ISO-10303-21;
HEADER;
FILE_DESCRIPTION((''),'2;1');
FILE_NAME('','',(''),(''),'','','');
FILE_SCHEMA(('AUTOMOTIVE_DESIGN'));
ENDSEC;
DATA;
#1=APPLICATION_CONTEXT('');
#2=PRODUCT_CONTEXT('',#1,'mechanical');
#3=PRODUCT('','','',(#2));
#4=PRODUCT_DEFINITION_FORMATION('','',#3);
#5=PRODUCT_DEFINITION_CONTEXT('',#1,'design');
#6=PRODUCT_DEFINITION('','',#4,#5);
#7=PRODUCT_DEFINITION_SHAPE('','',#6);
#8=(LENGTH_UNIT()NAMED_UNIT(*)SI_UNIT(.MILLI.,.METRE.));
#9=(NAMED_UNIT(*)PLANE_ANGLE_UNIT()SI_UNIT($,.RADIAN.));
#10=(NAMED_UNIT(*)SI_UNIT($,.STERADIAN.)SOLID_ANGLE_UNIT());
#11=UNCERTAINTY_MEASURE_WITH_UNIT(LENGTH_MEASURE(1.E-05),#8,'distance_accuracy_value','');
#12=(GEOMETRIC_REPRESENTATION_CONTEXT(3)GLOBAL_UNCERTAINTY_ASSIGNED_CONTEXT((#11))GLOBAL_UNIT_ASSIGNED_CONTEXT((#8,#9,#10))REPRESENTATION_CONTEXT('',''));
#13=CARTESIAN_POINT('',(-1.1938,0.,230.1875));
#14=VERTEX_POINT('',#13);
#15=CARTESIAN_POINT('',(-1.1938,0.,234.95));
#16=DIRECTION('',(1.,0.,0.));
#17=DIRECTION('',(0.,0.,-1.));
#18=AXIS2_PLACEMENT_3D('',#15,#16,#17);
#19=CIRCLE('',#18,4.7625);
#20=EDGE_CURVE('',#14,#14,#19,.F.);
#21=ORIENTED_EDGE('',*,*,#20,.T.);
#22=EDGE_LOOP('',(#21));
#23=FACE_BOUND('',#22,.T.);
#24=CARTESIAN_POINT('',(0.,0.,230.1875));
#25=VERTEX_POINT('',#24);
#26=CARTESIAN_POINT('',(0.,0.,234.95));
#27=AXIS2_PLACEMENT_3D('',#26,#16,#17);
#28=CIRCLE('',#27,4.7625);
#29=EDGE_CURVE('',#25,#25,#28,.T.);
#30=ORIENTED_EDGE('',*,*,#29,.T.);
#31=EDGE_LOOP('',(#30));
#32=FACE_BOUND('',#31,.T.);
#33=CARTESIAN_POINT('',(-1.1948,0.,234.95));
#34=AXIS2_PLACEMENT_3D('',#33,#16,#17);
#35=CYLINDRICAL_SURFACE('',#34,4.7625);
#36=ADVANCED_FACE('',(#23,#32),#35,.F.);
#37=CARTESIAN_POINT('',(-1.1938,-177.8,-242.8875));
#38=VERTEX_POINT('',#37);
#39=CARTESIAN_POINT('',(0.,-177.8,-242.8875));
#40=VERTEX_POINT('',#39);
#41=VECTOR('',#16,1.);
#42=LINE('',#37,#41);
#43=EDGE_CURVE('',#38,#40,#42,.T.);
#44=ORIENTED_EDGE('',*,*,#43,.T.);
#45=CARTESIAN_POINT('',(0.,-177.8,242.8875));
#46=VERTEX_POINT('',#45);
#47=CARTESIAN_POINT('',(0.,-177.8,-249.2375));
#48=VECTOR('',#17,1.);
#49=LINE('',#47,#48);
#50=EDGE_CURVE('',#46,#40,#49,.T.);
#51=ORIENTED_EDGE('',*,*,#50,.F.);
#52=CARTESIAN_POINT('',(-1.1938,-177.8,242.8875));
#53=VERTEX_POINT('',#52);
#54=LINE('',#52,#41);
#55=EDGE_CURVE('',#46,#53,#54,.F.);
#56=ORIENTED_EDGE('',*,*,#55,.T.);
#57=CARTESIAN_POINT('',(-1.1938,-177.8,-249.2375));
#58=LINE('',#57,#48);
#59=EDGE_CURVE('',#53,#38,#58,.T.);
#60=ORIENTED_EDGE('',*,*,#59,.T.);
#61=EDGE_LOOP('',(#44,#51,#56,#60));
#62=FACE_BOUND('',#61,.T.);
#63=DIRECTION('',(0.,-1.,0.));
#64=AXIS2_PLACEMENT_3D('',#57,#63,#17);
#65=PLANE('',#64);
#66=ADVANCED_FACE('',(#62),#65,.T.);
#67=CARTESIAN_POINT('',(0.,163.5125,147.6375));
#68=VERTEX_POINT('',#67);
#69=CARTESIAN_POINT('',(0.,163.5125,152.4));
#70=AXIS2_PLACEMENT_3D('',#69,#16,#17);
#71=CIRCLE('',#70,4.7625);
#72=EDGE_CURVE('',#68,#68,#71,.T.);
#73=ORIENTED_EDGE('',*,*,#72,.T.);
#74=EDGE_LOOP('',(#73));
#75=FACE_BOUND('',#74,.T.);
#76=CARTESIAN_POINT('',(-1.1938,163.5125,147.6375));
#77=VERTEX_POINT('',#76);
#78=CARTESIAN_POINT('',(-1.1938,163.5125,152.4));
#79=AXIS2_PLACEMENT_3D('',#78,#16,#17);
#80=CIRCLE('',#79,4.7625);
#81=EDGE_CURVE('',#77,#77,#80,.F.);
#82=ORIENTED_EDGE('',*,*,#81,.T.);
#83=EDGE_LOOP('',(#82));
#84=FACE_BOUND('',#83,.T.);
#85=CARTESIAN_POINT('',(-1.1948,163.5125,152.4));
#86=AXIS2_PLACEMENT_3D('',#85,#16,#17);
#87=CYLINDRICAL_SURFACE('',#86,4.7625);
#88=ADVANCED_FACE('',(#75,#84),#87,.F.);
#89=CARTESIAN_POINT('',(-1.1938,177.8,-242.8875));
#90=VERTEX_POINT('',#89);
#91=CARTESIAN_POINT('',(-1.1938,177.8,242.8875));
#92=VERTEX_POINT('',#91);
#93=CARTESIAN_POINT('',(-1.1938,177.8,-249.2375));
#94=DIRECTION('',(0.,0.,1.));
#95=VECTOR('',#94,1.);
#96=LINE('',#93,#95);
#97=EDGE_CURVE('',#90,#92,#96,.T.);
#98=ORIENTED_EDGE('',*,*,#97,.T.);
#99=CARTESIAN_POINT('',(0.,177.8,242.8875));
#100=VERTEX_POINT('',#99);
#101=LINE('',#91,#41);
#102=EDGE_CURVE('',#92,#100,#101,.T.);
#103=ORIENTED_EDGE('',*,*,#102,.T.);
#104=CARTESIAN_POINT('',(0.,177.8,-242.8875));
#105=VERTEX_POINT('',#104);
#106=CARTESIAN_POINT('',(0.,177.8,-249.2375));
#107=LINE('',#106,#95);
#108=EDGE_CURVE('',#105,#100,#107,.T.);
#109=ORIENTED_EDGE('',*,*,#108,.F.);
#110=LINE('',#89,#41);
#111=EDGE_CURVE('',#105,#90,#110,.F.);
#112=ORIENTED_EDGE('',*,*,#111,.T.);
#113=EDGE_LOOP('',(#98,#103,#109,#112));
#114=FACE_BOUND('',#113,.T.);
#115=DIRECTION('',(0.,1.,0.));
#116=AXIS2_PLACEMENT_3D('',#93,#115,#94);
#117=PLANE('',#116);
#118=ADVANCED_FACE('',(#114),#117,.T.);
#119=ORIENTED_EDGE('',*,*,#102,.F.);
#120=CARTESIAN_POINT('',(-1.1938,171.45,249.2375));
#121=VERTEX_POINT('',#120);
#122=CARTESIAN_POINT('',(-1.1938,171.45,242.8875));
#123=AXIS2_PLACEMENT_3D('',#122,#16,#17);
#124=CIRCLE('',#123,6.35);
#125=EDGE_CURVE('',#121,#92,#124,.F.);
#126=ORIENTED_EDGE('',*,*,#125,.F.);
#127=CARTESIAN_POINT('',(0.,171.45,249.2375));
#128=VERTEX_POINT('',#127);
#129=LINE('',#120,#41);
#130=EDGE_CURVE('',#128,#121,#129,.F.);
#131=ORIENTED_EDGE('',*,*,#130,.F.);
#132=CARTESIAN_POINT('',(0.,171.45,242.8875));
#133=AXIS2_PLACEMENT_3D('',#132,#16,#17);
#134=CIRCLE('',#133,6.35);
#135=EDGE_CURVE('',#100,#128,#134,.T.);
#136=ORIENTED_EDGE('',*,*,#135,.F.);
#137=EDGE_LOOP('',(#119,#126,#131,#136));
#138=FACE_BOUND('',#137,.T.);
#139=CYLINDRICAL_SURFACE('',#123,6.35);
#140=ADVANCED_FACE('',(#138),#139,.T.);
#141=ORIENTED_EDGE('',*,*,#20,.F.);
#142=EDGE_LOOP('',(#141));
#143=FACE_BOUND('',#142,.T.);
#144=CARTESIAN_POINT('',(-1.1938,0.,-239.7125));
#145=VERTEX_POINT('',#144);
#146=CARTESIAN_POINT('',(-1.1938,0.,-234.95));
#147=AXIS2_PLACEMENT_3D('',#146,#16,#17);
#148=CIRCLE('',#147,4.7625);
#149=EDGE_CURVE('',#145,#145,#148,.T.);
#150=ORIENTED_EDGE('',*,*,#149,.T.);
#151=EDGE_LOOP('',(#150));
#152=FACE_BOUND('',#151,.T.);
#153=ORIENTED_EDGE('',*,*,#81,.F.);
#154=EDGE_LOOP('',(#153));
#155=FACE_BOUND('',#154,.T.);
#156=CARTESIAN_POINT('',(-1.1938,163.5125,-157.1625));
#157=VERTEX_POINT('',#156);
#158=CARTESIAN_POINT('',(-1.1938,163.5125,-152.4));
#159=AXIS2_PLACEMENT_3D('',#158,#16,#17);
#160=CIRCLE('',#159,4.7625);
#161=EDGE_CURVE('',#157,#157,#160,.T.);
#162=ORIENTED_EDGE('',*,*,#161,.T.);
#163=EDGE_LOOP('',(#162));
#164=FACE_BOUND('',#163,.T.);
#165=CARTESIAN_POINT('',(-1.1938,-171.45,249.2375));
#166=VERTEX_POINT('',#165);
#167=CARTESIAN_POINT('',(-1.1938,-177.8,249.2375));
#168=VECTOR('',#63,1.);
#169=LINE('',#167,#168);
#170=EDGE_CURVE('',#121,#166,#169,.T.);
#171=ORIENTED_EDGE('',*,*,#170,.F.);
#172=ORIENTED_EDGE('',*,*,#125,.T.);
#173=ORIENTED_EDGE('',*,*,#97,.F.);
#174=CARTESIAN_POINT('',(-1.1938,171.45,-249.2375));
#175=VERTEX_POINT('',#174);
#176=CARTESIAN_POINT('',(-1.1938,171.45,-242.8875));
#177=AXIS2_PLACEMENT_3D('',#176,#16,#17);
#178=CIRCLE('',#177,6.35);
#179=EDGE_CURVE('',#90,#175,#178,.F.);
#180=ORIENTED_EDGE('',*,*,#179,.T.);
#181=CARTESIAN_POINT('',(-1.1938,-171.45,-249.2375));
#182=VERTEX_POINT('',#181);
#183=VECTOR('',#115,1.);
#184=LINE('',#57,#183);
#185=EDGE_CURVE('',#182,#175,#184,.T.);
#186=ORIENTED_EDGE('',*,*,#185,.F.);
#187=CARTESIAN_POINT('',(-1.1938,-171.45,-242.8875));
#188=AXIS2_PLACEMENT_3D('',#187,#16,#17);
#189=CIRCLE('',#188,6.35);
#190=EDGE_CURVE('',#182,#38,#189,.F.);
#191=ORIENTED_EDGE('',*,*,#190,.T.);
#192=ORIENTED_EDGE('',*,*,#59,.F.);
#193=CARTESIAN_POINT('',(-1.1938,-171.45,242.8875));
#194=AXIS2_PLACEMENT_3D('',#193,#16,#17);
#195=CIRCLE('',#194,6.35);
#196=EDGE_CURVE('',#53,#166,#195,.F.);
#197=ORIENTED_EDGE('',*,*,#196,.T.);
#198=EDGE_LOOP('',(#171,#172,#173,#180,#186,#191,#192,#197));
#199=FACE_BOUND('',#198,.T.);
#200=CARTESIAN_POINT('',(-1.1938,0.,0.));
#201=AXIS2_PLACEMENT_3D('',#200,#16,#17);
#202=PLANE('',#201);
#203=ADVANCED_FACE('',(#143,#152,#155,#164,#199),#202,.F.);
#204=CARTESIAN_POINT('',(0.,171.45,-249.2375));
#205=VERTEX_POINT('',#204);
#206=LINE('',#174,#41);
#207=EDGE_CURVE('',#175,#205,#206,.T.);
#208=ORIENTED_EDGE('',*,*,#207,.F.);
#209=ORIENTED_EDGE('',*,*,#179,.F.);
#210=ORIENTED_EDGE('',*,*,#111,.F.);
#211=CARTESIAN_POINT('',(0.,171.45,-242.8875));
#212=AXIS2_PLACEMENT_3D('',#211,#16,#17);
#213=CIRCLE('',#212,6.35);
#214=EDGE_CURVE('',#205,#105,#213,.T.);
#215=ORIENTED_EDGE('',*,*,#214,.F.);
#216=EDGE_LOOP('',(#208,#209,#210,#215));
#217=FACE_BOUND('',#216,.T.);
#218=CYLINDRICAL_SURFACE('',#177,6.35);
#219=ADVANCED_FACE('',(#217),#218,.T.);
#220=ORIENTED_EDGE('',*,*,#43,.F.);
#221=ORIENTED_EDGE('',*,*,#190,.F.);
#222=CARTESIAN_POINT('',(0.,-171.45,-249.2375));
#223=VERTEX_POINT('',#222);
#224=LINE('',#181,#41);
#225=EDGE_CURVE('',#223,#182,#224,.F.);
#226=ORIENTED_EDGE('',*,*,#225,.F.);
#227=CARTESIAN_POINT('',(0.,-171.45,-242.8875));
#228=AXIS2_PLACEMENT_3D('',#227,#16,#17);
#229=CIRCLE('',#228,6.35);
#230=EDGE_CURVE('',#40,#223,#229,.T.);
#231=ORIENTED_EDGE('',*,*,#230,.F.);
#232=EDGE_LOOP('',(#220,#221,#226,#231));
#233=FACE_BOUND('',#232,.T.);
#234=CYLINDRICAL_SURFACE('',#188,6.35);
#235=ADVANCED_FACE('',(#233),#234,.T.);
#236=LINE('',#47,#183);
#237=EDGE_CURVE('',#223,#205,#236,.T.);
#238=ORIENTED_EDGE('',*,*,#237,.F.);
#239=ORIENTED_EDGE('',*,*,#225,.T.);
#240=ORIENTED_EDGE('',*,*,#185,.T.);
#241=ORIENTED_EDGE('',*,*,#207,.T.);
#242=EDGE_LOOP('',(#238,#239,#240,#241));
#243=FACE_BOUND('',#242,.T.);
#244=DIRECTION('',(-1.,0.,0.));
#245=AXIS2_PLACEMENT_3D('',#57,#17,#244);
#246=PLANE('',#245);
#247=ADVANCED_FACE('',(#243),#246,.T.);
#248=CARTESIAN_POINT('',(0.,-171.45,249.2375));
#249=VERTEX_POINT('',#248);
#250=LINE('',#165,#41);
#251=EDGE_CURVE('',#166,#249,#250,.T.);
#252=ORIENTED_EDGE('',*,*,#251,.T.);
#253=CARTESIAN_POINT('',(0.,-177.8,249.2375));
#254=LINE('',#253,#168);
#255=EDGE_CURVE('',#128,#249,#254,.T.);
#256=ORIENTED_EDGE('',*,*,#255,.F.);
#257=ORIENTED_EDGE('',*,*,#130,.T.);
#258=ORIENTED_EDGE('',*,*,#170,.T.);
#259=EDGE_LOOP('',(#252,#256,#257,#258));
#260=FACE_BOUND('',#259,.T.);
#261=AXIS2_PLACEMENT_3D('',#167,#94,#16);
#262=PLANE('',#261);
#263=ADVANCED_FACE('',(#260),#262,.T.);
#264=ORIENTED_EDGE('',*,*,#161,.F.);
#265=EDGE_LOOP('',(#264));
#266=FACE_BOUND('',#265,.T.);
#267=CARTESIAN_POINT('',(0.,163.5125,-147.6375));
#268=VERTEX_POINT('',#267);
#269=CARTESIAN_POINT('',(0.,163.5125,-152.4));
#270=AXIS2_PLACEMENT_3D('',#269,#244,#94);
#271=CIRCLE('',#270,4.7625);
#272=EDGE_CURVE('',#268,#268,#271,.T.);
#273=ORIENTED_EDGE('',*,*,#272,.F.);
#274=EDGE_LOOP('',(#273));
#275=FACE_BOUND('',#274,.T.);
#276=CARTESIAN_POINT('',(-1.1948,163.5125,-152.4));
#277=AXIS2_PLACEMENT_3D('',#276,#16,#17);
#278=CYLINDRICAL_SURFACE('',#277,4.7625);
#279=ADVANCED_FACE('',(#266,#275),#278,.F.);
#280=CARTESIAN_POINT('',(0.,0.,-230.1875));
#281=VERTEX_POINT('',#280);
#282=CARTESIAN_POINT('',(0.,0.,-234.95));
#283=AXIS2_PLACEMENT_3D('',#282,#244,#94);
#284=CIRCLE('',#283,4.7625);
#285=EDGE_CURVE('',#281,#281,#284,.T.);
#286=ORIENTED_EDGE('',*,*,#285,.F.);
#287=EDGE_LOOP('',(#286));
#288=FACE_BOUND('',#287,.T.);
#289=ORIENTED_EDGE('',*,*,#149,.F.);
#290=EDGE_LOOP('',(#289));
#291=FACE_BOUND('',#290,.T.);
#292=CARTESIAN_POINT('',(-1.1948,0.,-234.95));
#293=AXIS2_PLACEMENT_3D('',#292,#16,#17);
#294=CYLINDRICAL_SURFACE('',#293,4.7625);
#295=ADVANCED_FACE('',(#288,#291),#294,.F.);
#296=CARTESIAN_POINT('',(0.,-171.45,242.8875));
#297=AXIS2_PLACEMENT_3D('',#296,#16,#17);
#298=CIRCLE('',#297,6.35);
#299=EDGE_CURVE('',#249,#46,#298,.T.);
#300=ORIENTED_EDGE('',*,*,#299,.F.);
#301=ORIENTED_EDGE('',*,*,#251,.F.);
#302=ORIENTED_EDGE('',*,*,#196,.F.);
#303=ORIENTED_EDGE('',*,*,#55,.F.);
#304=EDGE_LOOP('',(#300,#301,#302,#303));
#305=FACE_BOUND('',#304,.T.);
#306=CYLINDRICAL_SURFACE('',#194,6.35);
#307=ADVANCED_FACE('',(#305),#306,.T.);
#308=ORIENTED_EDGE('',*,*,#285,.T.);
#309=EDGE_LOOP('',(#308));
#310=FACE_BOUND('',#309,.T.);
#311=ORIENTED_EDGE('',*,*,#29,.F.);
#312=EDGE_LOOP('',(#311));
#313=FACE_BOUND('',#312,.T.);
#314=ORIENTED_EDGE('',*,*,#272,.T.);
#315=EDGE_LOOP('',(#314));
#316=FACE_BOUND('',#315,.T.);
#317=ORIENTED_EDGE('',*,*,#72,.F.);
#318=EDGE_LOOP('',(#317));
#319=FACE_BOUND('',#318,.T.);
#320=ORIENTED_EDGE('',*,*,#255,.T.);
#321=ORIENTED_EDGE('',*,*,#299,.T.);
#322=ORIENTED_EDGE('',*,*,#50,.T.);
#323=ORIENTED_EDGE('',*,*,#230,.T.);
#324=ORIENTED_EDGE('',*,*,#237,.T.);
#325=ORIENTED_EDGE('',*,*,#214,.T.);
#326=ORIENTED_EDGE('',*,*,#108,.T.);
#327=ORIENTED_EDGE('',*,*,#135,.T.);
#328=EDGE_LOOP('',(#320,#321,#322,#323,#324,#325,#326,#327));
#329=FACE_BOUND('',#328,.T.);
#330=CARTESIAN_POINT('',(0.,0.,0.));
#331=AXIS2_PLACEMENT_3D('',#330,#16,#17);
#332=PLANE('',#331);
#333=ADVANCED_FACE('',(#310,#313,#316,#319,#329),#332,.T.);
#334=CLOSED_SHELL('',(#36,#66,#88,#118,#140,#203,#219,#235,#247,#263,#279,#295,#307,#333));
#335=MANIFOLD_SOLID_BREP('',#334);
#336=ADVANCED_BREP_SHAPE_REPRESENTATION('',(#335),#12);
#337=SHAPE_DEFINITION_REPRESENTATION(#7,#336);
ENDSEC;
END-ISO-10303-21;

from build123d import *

# Parameters (mm, degrees)
SKETCH1_W          = 498.475
SKETCH1_H          = 355.6
BASE_FLANGE1_DEPTH = 1.1938
CUT_EXTRUDE1_REACH = 308.159
SKETCH6_R          = 4.7625
FILLET1_R          = 6.35


# Sheet-metal steps are written as plain solids
with BuildPart() as part:
    # Sketch1 → Base-Flange1 (new body)
    with BuildSketch(Plane(origin=(0, 0, 0), x_dir=(0, 0, -1), z_dir=(1, 0, 0))):
        Rectangle(SKETCH1_W, SKETCH1_H)
    extrude(amount=-BASE_FLANGE1_DEPTH)

    # Sketch6 → Cut-Extrude1 (cut, up to next)
    with BuildSketch(Plane(origin=(0, 0, 0), x_dir=(0, 0, -1), z_dir=(1, 0, 0)), mode=Mode.PRIVATE) as cut_extrude1_sk1:
        with Locations((-152.4, 163.5125)):
            Circle(SKETCH6_R)
    cut_extrude1_tool1 = extrude(cut_extrude1_sk1.sketch, amount=-CUT_EXTRUDE1_REACH, mode=Mode.PRIVATE) & part.part
    # Sketch6 → Cut-Extrude1 (cut, up to next)
    with BuildSketch(Plane(origin=(0, 0, 0), x_dir=(0, 0, -1), z_dir=(1, 0, 0)), mode=Mode.PRIVATE) as cut_extrude1_sk2:
        with Locations((-234.95, 0)):
            Circle(SKETCH6_R)
    cut_extrude1_tool2 = extrude(cut_extrude1_sk2.sketch, amount=-CUT_EXTRUDE1_REACH, mode=Mode.PRIVATE) & part.part
    cut_extrude1_1 = cut_extrude1_tool1.solids().sort_by_distance((0, 163.5125, 152.4))[0]
    add(cut_extrude1_1, mode=Mode.SUBTRACT)
    cut_extrude1_2 = cut_extrude1_tool2.solids().sort_by_distance((0, 0, 234.95))[0]
    add(cut_extrude1_2, mode=Mode.SUBTRACT)
    cut_extrude1 = cut_extrude1_1 + cut_extrude1_2  # Cut-Extrude1 as one shape, for the pattern or mirror that repeats it

    # Mirror1: Cut-Extrude1 across plane
    add(cut_extrude1.mirror(Plane.XY), mode=Mode.SUBTRACT)

    # Fillet1
    fillet1_edges = [part.edges().sort_by_distance(p)[0] for p in [
        (-0.5969, 177.8, 249.2375),
        (-0.5969, 177.8, -249.2375),
        (-0.5969, -177.8, -249.2375),
        (-0.5969, -177.8, 249.2375),
    ]]
    fillet(fillet1_edges, radius=FILLET1_R)


solid = part.part
